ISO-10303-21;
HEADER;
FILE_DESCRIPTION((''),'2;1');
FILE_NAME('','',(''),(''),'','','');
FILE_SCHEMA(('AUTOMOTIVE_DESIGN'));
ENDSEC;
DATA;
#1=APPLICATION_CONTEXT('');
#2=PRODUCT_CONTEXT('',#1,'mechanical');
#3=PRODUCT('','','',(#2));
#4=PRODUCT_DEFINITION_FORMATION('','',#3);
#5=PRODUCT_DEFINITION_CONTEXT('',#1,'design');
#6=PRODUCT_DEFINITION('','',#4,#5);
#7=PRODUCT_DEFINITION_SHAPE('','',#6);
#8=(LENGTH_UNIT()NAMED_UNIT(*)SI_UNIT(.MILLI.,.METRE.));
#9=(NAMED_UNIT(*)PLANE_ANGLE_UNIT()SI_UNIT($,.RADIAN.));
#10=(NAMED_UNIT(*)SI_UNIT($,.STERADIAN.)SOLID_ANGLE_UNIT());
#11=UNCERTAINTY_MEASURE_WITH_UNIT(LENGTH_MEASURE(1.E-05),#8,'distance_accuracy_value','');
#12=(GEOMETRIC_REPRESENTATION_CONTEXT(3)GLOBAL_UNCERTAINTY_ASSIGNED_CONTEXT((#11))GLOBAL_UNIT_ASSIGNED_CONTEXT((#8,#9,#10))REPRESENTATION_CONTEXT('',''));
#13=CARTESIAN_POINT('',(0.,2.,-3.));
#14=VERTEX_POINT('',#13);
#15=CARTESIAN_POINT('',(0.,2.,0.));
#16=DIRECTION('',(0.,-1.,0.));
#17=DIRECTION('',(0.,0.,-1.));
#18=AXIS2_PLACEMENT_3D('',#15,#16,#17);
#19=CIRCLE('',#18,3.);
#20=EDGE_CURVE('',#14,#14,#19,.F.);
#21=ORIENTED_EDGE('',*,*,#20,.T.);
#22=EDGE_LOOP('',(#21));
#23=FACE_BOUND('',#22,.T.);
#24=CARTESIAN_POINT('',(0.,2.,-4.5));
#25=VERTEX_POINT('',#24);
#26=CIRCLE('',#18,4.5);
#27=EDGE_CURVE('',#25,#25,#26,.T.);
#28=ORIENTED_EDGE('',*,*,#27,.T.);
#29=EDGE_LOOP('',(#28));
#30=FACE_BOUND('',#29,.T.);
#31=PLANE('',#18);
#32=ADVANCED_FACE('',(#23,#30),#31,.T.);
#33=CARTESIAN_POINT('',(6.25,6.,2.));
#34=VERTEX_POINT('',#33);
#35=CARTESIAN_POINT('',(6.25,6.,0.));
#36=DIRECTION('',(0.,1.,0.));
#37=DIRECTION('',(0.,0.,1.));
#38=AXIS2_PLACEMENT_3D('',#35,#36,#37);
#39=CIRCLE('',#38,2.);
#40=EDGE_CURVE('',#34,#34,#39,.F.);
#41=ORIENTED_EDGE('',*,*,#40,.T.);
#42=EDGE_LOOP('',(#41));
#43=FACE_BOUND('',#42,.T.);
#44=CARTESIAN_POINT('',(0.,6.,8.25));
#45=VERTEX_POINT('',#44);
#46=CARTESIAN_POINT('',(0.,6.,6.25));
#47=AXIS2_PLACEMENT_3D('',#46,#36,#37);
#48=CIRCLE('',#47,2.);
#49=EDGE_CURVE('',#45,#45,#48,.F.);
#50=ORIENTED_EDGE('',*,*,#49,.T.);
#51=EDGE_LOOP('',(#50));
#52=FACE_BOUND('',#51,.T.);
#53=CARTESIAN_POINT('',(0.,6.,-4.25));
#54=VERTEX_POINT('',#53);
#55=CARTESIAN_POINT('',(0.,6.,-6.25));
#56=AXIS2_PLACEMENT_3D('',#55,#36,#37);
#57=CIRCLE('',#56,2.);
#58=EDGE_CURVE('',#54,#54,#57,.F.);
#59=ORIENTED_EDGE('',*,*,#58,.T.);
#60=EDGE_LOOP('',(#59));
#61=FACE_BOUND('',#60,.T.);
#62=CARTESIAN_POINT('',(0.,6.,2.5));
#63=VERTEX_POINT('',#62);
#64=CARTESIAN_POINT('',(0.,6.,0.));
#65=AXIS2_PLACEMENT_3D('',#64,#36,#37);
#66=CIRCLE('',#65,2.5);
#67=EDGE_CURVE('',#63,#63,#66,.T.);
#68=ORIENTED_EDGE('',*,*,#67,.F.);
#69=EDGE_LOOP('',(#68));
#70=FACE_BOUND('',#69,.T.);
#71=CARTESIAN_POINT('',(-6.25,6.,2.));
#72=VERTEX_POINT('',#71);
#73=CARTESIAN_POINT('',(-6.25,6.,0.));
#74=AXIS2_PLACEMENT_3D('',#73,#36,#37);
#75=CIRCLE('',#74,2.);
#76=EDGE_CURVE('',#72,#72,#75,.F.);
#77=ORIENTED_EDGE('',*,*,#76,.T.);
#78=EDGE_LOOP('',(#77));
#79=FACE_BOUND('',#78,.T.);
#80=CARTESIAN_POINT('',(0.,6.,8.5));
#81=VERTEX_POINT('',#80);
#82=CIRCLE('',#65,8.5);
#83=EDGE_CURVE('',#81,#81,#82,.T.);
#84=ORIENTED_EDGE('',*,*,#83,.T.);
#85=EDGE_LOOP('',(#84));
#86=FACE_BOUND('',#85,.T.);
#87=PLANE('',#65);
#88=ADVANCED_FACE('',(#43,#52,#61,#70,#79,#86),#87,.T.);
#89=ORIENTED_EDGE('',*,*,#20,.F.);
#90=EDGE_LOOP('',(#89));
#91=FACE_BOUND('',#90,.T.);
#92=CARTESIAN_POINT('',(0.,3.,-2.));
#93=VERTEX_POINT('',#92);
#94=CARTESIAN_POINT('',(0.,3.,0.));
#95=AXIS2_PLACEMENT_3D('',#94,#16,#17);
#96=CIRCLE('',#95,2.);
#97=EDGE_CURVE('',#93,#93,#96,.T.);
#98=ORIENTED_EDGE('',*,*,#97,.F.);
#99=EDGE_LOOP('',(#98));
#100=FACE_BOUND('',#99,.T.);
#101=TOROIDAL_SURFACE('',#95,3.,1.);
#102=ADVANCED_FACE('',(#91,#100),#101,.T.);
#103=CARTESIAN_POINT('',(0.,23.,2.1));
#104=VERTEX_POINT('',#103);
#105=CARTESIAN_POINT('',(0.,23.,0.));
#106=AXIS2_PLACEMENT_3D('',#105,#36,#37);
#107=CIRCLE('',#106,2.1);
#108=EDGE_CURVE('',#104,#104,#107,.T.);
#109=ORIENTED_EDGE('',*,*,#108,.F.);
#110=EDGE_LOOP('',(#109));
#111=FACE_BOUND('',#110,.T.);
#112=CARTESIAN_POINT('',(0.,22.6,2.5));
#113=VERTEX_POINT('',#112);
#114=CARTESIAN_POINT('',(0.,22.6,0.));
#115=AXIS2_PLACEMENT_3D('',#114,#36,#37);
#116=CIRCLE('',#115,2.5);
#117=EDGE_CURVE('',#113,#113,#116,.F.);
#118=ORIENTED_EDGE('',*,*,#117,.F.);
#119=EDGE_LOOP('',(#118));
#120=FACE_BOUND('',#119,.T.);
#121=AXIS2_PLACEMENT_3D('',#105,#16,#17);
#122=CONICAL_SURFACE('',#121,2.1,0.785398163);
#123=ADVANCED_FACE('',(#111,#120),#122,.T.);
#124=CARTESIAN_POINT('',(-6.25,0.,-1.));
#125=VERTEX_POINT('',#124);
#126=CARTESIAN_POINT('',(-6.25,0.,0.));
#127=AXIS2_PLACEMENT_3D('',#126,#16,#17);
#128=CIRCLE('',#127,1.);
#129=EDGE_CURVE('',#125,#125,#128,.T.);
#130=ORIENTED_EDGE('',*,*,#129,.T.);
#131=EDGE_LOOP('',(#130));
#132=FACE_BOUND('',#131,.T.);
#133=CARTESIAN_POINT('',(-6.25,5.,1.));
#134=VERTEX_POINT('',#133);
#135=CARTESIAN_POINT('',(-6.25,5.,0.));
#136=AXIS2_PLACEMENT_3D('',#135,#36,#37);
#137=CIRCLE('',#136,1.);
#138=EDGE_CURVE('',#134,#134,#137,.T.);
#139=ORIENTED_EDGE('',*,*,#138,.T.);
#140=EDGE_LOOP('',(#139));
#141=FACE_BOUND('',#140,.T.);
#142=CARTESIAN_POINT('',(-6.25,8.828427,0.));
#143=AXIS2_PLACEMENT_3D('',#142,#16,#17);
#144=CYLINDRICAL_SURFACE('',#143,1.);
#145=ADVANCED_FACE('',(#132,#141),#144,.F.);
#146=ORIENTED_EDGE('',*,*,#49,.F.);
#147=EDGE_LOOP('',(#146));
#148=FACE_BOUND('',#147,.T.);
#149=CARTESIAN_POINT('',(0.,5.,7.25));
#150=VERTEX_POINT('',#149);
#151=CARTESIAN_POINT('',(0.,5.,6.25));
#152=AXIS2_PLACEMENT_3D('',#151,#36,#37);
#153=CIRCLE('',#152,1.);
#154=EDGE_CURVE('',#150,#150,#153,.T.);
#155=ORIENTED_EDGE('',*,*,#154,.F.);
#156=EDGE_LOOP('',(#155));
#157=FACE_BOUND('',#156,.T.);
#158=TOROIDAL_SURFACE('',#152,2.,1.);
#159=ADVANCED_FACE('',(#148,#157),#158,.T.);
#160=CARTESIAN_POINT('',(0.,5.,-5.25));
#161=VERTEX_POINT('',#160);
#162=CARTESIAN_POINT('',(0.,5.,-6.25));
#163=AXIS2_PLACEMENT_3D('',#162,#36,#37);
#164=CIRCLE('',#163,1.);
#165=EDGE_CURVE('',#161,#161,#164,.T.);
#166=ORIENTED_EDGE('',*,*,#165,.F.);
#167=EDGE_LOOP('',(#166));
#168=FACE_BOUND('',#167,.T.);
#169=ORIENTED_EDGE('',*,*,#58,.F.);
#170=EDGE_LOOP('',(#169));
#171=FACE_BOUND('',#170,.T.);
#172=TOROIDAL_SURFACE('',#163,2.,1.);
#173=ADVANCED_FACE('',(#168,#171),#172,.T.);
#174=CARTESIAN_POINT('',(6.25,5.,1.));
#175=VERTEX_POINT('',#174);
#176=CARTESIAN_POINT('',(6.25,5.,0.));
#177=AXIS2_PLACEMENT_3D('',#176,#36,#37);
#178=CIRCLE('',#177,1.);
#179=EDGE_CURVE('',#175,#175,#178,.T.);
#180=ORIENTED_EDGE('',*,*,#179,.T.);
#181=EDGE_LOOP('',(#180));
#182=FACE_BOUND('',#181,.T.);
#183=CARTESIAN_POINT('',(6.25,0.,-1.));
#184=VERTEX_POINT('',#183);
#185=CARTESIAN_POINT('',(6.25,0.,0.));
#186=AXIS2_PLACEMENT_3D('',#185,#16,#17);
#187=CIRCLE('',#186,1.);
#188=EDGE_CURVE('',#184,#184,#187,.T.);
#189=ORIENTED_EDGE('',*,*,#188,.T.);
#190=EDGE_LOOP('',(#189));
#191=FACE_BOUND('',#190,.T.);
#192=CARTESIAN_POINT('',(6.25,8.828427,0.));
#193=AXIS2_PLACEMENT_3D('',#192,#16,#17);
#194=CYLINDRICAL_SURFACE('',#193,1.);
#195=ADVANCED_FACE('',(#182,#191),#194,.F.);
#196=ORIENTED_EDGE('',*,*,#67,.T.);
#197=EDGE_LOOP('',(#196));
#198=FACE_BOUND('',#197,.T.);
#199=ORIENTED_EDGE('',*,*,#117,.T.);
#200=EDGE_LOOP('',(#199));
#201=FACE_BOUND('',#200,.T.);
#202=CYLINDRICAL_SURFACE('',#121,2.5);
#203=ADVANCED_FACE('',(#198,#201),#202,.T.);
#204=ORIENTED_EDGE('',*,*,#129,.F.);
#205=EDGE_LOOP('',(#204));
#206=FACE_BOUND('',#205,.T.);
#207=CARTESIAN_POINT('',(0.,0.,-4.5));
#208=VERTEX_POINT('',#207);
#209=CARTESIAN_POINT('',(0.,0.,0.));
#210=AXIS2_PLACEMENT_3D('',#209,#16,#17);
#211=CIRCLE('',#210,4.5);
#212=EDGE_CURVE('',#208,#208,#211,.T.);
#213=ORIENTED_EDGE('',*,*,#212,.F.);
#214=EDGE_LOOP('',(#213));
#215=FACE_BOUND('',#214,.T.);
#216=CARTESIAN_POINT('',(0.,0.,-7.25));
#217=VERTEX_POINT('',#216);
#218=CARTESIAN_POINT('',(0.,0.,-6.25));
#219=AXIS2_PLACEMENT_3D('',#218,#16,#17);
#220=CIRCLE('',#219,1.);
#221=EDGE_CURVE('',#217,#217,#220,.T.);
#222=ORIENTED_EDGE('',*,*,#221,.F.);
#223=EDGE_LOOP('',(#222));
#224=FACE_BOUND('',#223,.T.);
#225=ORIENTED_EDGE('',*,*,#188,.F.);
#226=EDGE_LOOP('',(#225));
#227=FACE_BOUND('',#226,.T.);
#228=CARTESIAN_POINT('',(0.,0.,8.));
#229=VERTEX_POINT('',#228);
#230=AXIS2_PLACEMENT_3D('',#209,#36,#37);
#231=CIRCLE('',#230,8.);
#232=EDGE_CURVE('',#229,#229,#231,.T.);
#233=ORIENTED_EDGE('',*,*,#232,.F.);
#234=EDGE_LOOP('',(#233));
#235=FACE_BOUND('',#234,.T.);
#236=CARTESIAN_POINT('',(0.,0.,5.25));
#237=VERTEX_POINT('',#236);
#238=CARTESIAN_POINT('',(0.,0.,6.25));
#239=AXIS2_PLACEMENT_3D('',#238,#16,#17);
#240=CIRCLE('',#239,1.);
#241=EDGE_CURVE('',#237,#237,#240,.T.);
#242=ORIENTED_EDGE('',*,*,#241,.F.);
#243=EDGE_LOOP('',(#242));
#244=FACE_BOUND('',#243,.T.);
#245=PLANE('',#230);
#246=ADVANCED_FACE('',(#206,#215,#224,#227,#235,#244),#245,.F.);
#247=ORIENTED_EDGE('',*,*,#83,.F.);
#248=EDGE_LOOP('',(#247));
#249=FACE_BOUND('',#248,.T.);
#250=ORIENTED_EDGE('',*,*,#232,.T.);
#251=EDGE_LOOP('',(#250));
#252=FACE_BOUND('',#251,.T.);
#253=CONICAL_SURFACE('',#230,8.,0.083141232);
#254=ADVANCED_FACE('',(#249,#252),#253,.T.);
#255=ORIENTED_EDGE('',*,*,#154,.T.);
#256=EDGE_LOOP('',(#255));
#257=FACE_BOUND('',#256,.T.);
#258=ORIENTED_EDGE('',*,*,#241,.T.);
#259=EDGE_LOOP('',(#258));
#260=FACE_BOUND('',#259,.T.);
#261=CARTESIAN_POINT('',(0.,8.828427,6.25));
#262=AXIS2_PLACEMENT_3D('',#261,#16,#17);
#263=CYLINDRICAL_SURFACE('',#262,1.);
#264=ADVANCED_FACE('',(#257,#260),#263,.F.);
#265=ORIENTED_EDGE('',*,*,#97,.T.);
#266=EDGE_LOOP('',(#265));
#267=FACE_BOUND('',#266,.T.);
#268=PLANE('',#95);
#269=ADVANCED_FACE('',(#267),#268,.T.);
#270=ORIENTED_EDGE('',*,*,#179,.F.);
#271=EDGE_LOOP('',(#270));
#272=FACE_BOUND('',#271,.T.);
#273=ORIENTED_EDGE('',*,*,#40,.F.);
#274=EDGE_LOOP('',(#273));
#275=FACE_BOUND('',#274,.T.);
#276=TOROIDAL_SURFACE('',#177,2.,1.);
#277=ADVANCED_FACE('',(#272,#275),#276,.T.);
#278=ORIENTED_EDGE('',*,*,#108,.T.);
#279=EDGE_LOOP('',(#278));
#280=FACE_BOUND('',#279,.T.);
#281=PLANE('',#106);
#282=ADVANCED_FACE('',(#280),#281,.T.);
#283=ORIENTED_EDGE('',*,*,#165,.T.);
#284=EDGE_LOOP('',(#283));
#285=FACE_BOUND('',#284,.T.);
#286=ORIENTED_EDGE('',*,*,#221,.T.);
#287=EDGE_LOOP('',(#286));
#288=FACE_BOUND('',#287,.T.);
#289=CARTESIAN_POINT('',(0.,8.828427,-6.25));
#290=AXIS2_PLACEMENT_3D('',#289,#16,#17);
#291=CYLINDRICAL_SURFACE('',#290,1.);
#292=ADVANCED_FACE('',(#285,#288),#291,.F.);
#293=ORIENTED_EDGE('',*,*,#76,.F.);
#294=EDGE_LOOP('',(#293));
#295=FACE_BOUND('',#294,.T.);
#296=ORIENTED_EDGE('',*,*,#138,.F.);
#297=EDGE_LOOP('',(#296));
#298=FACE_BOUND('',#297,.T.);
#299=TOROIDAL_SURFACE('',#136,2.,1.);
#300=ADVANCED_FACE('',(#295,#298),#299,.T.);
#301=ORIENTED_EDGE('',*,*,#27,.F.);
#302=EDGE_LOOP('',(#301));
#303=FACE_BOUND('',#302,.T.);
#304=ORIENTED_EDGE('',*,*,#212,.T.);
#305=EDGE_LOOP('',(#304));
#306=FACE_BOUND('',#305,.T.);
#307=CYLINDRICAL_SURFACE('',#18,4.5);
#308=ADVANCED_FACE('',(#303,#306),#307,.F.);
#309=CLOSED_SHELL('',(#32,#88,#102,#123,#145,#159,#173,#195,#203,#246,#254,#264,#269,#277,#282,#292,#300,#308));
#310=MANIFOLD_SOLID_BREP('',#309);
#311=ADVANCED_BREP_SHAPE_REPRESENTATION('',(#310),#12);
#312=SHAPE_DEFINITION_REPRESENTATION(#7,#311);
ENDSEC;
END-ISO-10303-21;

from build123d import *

# Parameters (mm, degrees)
SKETCH3_R           = 8.5
SKETCH1_R           = 8
SKETCH4_R           = 2.5
BOSS_EXTRUDE1_DEPTH = 17
SKETCH5_R           = 4.5
CUT_EXTRUDE1_DEPTH  = 2
SKETCH6_R           = 1
CUT_EXTRUDE4_DEPTH  = 6
SKETCH8_R           = 2
CUT_EXTRUDE5_DEPTH  = 1
FILLET1_R           = 1
CHAMFER1_SIZE       = 0.4
FILLET2_R           = 1


with BuildPart() as part:
    # Sketch3 → Loft1 section 0
    with BuildSketch(Plane(origin=(0, 6, 0), x_dir=(1, 0, 0), z_dir=(0, 1, 0))):
        Circle(SKETCH3_R)
    # Sketch1 → Loft1 section 1
    with BuildSketch(Plane(origin=(0, 0, 0), x_dir=(1, 0, 0), z_dir=(0, 1, 0))):
        Circle(SKETCH1_R)
    loft()

    # Sketch4 → Boss-Extrude1 (add)
    with BuildSketch(Plane(origin=(0, 6, 0), x_dir=(1, 0, 0), z_dir=(0, 1, 0))):
        with Locations(Location((0, 0, 0), (0, 0, 270))):
            Circle(SKETCH4_R)
    extrude(amount=BOSS_EXTRUDE1_DEPTH)

    # Sketch5 → Cut-Extrude1 (cut)
    with BuildSketch(Plane.XZ):
        with Locations(Location((0, 0, 0), (0, 0, 270))):
            Circle(SKETCH5_R)
    extrude(amount=-CUT_EXTRUDE1_DEPTH, mode=Mode.SUBTRACT)

    # Sketch6 → Cut-Extrude4 (cut)
    with BuildSketch(Plane.XZ):
        with Locations(Location((0, 6.25, 0), (0, 0, 270))):
            Circle(SKETCH6_R)
        with Locations(Location((6.25, 0, 0), (0, 0, 270))):
            Circle(SKETCH6_R)
        with Locations(Location((0, -6.25, 0), (0, 0, 270))):
            Circle(SKETCH6_R)
        with Locations(Location((-6.25, 0, 0), (0, 0, 270))):
            Circle(SKETCH6_R)
    extrude(amount=-CUT_EXTRUDE4_DEPTH, mode=Mode.SUBTRACT)

    # Sketch8 → Cut-Extrude5 (cut)
    with BuildSketch(Plane.XZ.offset(-2)):
        with Locations(Location((0, 0, 0), (0, 0, 270))):
            Circle(SKETCH8_R)
    extrude(amount=-CUT_EXTRUDE5_DEPTH, mode=Mode.SUBTRACT)

    # Fillet1
    fillet1_edges = [part.edges().sort_by_distance(p)[0] for p in [
        (0, 2, 2),
    ]]
    fillet(fillet1_edges, radius=FILLET1_R - 0.0001)  # a hair under: the kernel refuses the full size

    # Chamfer1
    chamfer1_edges = [part.edges().sort_by_distance(p)[0] for p in [
        (0, 23, -2.5),
    ]]
    chamfer(chamfer1_edges, length=CHAMFER1_SIZE)

    # Fillet2
    fillet2_edges = [part.edges().sort_by_distance(p)[0] for p in [
        (0, 6, 7.25),
        (6.25, 6, 1),
        (0, 6, -5.25),
        (-6.25, 6, 1),
    ]]
    fillet(fillet2_edges, radius=FILLET2_R)


solid = part.part
